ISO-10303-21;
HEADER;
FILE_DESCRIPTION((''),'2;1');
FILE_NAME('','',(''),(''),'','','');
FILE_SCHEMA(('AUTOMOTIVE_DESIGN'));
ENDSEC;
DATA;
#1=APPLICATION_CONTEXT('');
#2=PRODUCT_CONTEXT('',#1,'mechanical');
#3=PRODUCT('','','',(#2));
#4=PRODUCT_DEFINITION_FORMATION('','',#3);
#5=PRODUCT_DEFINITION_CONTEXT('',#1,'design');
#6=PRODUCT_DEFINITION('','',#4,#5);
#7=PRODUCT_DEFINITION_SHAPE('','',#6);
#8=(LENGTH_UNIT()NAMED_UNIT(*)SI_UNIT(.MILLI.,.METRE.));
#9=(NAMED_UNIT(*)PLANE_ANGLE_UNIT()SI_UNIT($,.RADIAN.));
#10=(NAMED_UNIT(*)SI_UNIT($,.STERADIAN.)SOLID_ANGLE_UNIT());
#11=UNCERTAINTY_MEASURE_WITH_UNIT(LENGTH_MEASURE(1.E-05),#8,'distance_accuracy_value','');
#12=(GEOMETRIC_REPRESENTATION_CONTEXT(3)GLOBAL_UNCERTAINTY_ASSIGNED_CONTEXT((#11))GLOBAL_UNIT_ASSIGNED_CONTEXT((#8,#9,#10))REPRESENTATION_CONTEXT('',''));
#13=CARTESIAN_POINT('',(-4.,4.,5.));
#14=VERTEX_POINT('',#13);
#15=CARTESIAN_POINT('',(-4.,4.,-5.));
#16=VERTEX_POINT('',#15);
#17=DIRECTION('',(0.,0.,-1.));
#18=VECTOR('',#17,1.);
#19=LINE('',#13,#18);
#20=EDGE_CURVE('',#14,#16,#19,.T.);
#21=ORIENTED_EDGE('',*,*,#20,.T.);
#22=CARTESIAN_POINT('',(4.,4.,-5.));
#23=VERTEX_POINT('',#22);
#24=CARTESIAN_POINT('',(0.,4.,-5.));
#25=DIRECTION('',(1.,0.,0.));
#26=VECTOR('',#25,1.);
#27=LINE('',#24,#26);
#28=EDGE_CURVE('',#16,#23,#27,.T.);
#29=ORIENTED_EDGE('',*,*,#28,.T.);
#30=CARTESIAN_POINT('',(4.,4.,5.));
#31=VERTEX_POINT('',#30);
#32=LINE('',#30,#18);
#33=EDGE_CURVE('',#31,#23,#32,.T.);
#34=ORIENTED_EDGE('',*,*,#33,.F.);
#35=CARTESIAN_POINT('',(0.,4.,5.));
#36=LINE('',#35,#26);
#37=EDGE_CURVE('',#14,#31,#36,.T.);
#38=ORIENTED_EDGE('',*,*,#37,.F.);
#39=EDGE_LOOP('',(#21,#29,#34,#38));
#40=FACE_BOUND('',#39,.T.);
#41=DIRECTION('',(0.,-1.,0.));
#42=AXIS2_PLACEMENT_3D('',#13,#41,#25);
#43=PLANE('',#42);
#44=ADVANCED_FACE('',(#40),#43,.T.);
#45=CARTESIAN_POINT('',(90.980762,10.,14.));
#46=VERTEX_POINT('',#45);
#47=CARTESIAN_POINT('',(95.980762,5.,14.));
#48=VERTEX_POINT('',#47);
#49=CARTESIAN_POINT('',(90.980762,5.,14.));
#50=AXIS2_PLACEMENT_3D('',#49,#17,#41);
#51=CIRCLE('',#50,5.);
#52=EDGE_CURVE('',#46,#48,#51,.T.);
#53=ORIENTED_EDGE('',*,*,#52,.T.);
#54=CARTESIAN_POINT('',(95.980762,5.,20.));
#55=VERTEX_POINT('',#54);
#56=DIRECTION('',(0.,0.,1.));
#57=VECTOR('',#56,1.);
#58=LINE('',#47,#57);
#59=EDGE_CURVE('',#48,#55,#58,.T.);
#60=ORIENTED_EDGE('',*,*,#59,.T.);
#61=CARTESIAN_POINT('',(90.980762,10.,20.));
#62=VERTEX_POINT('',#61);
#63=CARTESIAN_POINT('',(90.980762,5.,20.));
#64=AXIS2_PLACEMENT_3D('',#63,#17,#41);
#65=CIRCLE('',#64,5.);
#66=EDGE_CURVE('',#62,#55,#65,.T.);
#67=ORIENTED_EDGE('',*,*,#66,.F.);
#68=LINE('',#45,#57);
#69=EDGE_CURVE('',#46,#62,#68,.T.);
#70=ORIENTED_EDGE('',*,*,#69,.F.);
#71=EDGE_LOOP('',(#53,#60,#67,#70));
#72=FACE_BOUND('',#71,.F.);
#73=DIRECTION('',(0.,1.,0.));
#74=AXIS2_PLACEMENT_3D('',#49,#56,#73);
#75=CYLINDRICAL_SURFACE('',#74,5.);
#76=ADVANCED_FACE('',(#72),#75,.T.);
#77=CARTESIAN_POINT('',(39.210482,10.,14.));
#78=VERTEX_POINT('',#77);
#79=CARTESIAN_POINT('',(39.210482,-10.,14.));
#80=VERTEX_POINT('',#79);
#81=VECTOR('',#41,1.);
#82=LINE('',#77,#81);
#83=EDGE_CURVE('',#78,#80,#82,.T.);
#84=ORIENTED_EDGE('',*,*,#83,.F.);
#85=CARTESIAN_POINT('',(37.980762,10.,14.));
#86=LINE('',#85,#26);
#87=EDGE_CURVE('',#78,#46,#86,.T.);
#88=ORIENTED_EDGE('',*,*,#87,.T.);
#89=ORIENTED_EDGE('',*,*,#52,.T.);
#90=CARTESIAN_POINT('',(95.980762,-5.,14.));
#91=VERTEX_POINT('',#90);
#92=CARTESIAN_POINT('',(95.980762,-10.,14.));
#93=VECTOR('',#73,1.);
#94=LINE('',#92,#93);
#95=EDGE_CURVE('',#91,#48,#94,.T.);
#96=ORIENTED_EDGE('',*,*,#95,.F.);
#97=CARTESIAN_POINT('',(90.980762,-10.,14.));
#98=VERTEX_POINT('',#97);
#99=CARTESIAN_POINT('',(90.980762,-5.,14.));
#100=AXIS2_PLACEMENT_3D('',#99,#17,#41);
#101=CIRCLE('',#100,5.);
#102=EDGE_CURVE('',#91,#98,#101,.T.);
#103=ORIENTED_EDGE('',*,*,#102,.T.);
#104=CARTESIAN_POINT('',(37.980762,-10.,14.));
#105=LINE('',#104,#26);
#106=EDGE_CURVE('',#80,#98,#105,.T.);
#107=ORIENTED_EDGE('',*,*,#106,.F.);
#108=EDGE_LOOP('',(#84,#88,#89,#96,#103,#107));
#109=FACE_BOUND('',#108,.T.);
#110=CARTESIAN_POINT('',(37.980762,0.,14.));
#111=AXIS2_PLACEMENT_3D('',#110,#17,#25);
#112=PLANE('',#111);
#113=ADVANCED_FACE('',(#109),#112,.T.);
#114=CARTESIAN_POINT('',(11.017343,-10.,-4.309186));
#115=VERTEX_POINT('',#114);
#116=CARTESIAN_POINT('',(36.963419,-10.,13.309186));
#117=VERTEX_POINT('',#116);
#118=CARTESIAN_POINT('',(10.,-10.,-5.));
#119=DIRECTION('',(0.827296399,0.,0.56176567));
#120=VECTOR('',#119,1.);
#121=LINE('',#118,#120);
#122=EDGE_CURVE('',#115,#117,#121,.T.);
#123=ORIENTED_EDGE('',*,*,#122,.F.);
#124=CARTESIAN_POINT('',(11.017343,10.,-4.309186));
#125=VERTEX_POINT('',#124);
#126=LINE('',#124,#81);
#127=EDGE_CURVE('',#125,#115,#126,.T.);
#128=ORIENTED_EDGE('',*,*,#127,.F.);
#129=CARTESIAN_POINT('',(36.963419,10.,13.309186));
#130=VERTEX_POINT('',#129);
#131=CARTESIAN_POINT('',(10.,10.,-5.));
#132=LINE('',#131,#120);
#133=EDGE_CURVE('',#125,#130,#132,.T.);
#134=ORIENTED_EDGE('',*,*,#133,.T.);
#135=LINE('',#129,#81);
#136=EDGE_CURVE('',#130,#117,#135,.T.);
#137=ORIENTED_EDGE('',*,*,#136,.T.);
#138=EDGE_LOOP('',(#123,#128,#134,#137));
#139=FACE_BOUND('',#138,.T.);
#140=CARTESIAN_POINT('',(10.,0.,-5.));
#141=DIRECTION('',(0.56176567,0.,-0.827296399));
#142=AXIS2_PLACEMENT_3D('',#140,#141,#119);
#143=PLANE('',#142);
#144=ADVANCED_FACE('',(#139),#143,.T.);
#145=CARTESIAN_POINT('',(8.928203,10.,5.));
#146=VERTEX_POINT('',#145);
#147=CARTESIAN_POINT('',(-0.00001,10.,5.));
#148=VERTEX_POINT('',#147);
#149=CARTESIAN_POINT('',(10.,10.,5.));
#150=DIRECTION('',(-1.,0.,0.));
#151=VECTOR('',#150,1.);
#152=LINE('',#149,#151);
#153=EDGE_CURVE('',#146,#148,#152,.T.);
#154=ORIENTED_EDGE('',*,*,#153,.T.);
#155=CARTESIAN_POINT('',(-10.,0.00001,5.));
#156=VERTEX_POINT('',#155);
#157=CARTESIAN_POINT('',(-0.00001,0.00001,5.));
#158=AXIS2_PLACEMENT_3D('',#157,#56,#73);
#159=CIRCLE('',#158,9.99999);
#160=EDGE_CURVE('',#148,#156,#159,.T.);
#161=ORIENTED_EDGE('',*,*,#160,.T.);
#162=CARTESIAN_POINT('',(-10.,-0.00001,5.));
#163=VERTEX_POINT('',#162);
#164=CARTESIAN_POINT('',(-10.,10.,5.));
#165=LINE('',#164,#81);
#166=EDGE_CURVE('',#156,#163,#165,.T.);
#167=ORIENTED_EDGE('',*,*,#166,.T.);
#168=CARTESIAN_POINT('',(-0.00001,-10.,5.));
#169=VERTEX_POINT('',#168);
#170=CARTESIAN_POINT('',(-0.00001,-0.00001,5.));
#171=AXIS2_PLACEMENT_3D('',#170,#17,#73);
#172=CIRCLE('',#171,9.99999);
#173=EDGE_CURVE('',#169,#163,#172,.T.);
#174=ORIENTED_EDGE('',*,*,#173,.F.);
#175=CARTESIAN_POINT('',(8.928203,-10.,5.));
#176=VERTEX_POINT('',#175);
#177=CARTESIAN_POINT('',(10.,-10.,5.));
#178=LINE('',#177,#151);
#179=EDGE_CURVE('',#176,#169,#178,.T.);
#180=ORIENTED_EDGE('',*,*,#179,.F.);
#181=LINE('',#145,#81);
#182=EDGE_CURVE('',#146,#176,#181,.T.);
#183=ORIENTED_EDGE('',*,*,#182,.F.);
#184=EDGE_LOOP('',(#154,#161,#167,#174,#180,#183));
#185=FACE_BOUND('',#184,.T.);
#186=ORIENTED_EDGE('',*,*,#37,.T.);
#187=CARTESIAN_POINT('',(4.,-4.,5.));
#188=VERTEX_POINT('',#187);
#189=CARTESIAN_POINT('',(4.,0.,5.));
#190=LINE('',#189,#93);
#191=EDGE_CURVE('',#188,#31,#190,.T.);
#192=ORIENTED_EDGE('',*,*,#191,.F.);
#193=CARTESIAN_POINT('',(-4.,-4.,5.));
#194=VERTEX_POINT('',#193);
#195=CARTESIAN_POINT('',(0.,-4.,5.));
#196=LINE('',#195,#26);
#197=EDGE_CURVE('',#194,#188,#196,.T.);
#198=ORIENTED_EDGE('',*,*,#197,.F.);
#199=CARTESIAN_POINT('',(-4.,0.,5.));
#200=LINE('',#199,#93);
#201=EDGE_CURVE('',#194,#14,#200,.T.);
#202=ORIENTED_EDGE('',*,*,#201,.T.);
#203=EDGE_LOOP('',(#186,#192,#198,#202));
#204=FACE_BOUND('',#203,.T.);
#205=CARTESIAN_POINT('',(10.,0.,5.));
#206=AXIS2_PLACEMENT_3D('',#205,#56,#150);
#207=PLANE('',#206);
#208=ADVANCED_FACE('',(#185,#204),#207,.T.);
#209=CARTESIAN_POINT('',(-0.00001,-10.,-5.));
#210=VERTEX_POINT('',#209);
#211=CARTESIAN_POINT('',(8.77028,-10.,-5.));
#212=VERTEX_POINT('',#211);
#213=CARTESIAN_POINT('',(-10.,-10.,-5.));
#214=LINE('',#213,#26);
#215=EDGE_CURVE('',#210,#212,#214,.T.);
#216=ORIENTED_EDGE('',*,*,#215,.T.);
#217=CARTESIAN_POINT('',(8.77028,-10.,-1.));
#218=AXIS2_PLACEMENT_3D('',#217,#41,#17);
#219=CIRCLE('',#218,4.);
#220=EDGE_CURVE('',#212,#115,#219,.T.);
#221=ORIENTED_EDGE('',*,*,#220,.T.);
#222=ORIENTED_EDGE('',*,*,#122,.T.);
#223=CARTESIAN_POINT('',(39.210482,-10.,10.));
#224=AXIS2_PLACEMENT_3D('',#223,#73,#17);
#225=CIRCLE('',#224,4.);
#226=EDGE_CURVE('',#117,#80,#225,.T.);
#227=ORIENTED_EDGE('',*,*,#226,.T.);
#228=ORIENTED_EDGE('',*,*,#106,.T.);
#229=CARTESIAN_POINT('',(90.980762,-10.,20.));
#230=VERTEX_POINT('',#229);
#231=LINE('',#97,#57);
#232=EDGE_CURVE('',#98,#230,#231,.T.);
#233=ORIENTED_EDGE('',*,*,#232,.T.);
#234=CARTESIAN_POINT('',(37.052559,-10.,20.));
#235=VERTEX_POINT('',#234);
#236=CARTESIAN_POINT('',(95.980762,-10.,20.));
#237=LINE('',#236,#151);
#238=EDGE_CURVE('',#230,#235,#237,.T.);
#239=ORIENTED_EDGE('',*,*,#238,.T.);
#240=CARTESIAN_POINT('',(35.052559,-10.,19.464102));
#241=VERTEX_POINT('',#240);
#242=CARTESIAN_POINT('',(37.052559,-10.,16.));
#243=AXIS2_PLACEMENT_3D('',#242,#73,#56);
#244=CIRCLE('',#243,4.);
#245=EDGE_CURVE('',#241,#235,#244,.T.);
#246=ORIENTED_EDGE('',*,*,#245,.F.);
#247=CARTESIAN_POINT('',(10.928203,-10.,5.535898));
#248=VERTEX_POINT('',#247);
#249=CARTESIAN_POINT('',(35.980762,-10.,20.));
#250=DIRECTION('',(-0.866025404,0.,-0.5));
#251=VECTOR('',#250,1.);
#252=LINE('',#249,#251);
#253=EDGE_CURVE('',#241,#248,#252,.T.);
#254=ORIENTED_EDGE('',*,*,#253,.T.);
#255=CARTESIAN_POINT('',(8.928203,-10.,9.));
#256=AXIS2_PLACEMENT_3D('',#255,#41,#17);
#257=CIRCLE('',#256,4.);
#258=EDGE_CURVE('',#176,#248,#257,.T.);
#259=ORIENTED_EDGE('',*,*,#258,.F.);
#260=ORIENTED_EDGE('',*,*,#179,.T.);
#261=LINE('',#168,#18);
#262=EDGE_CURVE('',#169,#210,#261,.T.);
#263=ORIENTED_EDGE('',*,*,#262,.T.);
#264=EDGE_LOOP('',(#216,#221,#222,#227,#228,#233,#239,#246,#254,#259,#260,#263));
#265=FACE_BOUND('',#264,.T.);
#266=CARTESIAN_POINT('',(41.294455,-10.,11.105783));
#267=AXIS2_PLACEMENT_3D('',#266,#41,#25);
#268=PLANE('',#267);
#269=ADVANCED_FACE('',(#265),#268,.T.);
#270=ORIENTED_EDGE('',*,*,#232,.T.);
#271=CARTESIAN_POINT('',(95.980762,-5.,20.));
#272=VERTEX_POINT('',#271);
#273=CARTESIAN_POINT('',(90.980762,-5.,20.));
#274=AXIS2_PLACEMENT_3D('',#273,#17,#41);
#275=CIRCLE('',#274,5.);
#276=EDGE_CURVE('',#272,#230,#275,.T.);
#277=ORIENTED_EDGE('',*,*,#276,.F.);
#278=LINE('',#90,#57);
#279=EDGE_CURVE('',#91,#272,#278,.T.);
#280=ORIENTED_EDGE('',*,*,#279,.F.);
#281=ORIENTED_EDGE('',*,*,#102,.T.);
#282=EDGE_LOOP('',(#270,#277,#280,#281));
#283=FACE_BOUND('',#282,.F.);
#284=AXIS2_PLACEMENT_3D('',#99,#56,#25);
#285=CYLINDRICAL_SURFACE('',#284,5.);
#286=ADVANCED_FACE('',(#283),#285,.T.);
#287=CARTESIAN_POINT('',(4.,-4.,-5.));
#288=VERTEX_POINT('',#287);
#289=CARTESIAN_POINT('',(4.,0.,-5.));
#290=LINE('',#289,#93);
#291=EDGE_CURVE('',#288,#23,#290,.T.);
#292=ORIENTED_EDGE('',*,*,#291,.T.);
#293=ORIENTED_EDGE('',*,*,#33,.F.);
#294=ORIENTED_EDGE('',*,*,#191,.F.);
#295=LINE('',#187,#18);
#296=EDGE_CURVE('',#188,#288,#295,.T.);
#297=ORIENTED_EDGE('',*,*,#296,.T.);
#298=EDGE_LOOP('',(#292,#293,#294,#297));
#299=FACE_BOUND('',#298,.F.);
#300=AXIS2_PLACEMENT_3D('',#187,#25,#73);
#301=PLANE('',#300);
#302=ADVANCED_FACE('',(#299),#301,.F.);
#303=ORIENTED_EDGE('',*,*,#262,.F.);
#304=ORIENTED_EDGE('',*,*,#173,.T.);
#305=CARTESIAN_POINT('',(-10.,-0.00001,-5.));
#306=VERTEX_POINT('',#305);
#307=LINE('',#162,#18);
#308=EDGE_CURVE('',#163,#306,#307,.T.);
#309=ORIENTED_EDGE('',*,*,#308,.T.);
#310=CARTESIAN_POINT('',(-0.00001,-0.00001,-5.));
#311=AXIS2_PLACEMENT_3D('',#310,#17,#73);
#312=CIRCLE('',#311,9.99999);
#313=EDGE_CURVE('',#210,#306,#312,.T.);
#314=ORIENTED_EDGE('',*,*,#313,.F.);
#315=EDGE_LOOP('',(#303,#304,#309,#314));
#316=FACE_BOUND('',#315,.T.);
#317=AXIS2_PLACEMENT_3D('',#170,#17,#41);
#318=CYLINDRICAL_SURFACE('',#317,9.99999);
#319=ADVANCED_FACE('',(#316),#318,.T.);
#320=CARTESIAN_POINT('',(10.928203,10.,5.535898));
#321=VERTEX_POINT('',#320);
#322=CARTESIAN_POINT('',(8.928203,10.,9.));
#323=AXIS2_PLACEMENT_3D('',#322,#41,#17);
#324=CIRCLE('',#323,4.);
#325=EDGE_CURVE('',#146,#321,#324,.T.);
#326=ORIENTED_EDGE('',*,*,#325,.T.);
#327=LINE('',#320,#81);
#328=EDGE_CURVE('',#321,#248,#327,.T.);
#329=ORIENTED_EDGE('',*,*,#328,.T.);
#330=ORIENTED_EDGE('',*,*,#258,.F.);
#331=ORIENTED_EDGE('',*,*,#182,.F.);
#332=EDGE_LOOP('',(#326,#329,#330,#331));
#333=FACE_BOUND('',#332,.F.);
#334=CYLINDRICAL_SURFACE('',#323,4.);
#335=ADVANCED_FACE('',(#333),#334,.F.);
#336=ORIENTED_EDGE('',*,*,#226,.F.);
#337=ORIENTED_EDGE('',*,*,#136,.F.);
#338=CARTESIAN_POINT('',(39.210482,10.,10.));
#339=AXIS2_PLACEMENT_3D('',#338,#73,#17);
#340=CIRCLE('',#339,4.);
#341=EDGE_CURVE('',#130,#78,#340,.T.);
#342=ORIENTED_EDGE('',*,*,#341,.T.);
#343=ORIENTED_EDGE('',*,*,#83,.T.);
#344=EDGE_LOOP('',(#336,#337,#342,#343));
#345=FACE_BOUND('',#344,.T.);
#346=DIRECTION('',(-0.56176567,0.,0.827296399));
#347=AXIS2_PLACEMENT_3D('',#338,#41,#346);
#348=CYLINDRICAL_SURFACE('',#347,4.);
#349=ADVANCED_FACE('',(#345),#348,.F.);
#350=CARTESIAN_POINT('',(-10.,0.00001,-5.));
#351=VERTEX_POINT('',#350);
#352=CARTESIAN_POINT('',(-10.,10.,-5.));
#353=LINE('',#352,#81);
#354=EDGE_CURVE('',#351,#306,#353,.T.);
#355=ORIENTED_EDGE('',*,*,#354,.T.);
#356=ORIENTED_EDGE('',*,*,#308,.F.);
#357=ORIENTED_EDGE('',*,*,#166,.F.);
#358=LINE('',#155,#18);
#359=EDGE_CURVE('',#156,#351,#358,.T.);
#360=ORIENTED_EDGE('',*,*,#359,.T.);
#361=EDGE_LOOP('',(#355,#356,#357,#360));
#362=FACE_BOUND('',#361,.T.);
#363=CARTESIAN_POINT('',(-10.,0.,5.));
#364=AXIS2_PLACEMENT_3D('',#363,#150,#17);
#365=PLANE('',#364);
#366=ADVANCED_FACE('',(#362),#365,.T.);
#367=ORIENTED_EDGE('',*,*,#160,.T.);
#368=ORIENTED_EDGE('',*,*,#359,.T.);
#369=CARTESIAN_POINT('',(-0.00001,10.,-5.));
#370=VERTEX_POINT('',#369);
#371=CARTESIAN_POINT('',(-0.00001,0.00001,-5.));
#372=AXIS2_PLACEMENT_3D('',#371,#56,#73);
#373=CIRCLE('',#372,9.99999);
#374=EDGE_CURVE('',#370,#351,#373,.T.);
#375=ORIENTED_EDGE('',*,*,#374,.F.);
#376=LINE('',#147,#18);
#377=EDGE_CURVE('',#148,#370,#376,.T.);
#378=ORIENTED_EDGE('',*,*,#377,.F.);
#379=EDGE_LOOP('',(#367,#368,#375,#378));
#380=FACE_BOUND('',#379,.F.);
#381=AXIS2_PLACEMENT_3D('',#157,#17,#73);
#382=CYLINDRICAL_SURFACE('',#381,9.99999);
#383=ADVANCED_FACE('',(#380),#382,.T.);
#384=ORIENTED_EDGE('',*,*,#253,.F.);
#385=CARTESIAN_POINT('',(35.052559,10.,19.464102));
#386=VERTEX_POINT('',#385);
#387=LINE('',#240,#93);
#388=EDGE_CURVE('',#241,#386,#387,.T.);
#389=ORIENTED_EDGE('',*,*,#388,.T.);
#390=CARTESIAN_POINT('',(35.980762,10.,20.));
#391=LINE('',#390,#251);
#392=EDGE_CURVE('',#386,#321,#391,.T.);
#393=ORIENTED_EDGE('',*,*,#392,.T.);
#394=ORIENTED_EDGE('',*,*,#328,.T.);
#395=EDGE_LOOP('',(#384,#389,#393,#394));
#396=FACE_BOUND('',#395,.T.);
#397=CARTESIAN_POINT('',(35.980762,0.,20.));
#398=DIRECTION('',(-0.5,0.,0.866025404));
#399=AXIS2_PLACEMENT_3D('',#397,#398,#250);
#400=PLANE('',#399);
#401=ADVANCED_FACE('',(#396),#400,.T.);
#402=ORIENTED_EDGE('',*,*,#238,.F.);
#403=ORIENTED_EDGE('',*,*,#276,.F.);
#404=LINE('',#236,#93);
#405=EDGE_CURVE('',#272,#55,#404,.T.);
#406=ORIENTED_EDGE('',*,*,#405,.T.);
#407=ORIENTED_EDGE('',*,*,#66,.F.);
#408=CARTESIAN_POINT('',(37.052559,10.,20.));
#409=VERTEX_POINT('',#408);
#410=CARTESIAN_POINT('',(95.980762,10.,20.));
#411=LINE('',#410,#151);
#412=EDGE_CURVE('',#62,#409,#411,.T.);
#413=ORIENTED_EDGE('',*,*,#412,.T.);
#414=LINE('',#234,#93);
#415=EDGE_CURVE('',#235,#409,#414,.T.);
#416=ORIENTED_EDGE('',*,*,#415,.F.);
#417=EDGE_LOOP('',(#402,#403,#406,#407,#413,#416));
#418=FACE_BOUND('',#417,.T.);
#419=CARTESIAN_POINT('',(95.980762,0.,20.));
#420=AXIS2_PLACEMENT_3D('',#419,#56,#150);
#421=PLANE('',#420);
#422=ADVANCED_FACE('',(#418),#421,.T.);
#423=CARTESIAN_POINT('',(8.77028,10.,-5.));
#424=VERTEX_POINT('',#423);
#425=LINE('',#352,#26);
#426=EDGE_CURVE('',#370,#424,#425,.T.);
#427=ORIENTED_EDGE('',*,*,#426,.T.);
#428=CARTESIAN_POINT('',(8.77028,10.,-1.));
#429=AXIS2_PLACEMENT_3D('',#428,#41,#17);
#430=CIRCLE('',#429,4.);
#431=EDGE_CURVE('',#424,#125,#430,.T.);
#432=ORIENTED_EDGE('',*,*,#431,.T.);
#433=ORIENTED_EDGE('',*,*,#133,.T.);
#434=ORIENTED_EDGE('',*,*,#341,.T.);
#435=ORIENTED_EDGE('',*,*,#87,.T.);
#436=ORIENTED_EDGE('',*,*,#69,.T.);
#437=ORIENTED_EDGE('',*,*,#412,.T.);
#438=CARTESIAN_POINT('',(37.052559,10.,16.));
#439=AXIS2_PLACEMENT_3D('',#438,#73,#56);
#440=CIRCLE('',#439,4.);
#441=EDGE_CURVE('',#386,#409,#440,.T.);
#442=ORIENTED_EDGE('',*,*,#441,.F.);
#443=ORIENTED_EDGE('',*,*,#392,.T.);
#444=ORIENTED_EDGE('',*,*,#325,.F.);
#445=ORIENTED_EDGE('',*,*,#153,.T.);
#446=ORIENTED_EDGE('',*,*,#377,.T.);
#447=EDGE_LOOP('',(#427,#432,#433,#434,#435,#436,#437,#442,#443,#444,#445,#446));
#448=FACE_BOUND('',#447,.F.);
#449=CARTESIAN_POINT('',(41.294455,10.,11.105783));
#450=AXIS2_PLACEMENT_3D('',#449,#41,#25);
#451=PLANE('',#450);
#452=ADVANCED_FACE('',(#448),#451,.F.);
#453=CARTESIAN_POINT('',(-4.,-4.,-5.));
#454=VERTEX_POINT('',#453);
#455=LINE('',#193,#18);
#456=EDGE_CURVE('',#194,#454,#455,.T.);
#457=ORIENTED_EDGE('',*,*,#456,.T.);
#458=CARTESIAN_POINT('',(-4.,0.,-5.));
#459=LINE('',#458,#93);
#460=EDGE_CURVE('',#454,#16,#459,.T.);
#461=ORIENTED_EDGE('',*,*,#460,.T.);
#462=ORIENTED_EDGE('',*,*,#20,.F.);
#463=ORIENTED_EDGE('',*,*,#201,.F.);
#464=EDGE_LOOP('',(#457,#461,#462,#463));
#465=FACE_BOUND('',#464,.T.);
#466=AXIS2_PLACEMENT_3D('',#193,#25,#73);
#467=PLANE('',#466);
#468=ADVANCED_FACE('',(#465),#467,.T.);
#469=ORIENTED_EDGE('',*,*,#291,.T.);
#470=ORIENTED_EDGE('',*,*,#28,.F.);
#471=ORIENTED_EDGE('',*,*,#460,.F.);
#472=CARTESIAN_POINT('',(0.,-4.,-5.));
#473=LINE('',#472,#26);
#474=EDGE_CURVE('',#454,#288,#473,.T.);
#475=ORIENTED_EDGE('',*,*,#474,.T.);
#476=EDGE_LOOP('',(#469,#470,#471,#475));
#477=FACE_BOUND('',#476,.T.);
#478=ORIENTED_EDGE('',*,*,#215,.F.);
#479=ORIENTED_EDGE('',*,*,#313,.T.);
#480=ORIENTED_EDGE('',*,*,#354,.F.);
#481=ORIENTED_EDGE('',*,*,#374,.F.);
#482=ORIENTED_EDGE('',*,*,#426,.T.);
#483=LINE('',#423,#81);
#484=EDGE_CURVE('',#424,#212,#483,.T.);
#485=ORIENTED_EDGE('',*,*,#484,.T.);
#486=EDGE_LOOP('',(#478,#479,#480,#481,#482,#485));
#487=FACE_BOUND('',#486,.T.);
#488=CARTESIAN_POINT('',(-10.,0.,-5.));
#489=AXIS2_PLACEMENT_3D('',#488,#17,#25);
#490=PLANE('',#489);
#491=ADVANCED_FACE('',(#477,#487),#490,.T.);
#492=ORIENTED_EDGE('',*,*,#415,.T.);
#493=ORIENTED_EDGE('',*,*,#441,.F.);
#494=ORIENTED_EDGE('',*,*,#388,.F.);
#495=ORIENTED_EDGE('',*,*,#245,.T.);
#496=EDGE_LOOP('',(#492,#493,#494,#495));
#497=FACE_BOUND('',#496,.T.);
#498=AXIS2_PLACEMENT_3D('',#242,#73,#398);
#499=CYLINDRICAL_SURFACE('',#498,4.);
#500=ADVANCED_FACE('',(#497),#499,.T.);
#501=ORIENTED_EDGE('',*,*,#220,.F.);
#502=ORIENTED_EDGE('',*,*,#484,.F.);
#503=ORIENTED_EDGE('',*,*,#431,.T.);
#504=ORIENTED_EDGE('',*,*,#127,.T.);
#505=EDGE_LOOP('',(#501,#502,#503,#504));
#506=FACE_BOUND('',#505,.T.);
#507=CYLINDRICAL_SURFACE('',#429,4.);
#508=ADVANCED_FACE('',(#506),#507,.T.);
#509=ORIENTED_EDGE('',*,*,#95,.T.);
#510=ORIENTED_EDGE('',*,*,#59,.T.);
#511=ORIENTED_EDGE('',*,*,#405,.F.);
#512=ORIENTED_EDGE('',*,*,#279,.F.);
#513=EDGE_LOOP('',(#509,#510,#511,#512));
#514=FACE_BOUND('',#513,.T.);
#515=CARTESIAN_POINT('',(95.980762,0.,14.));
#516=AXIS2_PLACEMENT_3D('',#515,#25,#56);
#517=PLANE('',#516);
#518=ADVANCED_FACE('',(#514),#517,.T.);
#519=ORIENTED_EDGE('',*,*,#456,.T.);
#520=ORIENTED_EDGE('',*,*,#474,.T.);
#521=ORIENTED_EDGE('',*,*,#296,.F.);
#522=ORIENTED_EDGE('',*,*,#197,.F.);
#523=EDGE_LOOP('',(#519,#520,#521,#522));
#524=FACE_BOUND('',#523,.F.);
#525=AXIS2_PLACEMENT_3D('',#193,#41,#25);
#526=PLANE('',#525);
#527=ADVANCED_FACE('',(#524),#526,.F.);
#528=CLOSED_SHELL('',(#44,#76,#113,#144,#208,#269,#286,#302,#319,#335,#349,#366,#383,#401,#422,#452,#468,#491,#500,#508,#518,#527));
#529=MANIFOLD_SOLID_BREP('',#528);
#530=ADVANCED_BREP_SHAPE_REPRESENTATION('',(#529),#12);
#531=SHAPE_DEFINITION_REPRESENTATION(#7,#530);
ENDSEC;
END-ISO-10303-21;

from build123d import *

# Parameters (mm, degrees)
F1_DEPTH = 10
F2_W     = 8
F2_H     = 8
F3_DEPTH = 10
F4_R     = 9.99999
F5_R     = 4
F6_R     = 5


# Not quite as in the source:
# - a fillet or chamfer is up to 0.001 mm smaller than in the source, because OpenCascade refuses the exact size


with BuildPart() as f1:
    # F0 (on Front) → F1 (new body, symmetric)
    with BuildSketch(Plane.XZ):
        Polygon((35.9807621135, 20), (10, 5), (-10, 5), (-10, -5), (10, -5), (37.9807621135, 14), (95.9807621135, 14), (95.9807621135, 20), align=None)
    extrude(amount=F1_DEPTH, both=True)

    # F2 (on face) → F3 (cut, through all)
    with BuildSketch(Plane.XY.offset(5)):
        Rectangle(F2_W, F2_H)
    extrude(amount=-F3_DEPTH, mode=Mode.SUBTRACT)

    # F4 (radius 10 in the source; OpenCascade refuses exactly that, so slightly less here)
    f4_edges = [f1.edges().sort_by_distance(p)[0] for p in [
        (-10, -10, 0),
        (-10, 10, 0),
    ]]
    fillet(f4_edges, radius=F4_R)

    # F5
    f5_edges = [f1.edges().sort_by_distance(p)[0] for p in [
        (35.980762, 0, 20),
        (10, 0, 5),
        (10, 0, -5),
        (37.980762, 0, 14),
    ]]
    fillet(f5_edges, radius=F5_R)

    # F6
    f6_edges = [f1.edges().sort_by_distance(p)[0] for p in [
        (95.980762, 10, 17),
        (95.980762, -10, 17),
    ]]
    fillet(f6_edges, radius=F6_R)


solid = f1.part
